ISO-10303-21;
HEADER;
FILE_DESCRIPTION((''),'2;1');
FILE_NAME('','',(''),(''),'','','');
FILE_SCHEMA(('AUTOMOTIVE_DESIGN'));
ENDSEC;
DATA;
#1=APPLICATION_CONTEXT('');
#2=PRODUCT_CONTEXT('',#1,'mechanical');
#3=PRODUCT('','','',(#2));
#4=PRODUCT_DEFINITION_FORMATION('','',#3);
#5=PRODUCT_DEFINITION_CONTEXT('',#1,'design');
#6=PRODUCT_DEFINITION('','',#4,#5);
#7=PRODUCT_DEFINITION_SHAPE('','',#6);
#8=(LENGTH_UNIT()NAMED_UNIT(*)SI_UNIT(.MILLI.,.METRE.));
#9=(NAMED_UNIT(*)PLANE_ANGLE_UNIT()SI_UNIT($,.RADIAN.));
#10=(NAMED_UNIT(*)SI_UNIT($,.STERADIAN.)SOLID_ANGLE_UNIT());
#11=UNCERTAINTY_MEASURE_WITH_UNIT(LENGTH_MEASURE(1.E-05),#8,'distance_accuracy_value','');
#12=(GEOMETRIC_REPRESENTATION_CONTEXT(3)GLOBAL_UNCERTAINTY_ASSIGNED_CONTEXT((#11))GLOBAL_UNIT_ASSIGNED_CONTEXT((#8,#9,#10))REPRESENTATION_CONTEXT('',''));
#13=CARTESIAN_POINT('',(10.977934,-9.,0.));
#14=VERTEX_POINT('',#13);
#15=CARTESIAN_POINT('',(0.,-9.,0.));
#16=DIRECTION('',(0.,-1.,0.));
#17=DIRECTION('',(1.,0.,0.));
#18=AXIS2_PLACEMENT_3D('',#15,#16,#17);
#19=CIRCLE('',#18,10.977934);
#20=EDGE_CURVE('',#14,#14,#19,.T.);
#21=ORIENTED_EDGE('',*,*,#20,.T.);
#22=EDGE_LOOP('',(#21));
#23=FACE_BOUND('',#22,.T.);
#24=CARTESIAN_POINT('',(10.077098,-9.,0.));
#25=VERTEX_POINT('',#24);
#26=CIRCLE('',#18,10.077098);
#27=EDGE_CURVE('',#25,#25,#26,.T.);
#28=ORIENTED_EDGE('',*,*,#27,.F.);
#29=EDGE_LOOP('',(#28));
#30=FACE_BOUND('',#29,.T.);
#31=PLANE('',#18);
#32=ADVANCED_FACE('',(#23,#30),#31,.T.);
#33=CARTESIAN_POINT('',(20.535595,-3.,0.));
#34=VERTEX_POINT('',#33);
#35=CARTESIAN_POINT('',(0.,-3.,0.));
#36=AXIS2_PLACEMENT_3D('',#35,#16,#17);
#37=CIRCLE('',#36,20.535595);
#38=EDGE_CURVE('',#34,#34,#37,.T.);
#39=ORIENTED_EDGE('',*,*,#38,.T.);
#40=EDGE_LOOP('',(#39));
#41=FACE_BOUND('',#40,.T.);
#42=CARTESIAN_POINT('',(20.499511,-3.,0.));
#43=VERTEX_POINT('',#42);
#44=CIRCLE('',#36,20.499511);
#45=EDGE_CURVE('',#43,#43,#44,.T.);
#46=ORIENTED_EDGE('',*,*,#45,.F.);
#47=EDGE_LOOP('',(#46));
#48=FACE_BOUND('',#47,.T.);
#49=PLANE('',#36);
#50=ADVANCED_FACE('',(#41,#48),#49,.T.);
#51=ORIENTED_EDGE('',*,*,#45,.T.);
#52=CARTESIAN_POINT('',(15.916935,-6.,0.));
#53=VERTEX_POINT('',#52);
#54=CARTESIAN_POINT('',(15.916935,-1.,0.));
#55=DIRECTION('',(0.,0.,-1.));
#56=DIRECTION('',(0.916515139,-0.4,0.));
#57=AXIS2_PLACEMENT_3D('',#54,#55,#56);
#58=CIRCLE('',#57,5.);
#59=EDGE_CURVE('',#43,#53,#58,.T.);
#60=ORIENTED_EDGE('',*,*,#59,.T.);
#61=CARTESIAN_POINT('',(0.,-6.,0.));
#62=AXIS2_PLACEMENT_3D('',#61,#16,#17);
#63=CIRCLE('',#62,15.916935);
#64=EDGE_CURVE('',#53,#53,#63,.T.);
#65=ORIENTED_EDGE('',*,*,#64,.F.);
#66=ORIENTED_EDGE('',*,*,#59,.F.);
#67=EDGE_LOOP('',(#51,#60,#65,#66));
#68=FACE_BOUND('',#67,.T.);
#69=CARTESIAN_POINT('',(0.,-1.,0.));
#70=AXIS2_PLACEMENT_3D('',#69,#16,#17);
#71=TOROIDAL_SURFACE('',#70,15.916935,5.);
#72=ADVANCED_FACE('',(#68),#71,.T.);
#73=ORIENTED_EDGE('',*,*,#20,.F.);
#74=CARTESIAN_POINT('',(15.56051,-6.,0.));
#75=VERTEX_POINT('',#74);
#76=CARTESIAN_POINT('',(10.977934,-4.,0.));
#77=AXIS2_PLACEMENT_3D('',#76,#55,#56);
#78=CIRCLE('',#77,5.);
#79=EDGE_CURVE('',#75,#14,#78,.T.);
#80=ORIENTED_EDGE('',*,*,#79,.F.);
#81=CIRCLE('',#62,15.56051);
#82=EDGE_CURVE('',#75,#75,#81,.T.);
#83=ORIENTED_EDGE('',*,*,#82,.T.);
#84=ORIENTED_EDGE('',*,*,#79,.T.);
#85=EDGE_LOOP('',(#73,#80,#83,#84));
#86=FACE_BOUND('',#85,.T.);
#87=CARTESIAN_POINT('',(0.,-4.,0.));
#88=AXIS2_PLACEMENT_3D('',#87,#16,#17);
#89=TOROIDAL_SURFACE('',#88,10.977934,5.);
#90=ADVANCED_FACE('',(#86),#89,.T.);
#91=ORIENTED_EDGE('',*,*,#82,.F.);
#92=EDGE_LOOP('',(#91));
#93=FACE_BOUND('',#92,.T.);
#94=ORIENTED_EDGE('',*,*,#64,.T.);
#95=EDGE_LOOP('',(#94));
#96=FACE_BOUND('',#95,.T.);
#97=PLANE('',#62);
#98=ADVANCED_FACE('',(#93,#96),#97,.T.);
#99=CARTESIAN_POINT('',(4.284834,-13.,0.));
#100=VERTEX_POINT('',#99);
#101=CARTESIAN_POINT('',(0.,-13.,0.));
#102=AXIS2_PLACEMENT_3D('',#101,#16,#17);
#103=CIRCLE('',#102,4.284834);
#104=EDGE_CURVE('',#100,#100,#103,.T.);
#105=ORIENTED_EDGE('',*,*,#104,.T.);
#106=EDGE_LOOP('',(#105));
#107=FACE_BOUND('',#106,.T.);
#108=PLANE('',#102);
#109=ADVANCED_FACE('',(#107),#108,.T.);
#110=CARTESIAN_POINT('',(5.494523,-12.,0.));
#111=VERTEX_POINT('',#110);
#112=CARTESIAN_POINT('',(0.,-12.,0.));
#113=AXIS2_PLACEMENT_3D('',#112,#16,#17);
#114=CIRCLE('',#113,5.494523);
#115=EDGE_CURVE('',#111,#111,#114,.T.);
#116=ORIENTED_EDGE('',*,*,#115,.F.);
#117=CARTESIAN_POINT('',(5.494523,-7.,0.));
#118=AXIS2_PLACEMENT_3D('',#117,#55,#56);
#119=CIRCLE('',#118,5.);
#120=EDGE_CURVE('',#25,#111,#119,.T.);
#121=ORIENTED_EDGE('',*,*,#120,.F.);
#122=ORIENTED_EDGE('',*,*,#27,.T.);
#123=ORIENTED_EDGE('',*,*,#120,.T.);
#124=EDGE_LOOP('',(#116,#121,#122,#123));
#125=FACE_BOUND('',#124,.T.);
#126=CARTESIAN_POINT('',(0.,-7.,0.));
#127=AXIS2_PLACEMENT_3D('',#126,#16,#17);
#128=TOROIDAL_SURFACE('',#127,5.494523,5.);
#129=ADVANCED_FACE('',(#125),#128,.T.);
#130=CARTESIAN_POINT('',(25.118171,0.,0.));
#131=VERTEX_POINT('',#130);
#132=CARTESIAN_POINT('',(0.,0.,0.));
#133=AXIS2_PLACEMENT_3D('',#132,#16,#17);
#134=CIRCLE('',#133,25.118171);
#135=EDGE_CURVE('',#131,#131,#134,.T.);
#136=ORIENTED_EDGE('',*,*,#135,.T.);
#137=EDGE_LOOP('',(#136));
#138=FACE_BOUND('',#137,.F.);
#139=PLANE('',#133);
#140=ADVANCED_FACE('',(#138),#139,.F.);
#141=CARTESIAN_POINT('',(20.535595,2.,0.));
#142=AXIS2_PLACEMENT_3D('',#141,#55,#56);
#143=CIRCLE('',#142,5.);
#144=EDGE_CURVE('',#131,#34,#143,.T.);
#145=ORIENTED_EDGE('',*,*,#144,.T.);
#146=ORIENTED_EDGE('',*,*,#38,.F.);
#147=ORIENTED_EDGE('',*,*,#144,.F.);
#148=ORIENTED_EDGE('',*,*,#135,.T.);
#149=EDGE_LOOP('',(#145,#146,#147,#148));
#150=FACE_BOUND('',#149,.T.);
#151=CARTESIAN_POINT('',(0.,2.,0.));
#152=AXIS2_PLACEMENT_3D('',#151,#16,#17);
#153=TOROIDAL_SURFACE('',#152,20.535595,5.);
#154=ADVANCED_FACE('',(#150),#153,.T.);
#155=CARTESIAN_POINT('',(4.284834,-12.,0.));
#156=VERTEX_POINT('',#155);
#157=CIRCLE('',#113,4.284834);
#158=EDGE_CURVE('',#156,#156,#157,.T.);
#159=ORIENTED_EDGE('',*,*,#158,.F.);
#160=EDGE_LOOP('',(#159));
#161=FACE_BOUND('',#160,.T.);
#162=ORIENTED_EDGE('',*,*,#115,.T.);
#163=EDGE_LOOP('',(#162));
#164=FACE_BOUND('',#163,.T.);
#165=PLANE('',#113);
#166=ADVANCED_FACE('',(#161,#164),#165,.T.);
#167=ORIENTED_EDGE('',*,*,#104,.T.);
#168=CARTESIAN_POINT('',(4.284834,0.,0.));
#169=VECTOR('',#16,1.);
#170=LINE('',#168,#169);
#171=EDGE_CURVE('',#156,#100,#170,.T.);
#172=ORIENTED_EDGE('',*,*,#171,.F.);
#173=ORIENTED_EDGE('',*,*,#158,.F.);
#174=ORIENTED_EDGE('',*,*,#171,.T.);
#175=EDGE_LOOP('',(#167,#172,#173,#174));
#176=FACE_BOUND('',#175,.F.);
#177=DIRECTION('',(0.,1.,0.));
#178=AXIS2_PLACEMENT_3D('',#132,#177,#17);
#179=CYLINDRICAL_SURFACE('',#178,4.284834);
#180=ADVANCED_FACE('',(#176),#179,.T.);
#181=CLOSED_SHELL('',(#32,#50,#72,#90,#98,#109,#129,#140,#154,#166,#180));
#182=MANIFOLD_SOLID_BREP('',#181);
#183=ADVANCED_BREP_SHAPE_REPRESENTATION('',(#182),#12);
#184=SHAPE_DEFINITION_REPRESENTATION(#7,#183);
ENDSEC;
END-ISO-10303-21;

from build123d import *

# Parameters (mm, degrees)
F0_R     = 25.1181711361
F0_R_2   = 20.4995111856
F1_DEPTH = 3
F0_R_3   = 15.560509686
F2_DEPTH = 6
F0_R_4   = 10.0770984701
F3_DEPTH = 9
F0_R_5   = 4.2848341216
F4_DEPTH = 12
F0_R_6   = 1.2539122761
F5_DEPTH = 13
F6_DEPTH = 13


# Not quite as in the source:
# - a fillet or chamfer that OpenCascade refuses, or shapes differently, is made with other operations: its cross-section is extruded or revolved along the edge and cut away or added


with BuildPart() as f1:
    # F0 (on Front) → F1 (new body)
    with BuildSketch(Plane.XZ):
        Circle(F0_R)
        Circle(F0_R_2, mode=Mode.SUBTRACT)
    extrude(amount=F1_DEPTH)

    # F0 (on Front) → F2 (join)
    with BuildSketch(Plane.XZ):
        Circle(F0_R_2)
        Circle(F0_R_3, mode=Mode.SUBTRACT)
    extrude(amount=F2_DEPTH)

    # F0 (on Front) → F3 (join)
    with BuildSketch(Plane.XZ):
        Circle(F0_R_3)
        Circle(F0_R_4, mode=Mode.SUBTRACT)
    extrude(amount=F3_DEPTH)

    # F0 (on Front) → F4 (join)
    with BuildSketch(Plane.XZ):
        Circle(F0_R_4)
        Circle(F0_R_5, mode=Mode.SUBTRACT)
    extrude(amount=F4_DEPTH)

    # F0 (on Front) → F5 (join)
    with BuildSketch(Plane.XZ):
        Circle(F0_R_5)
        Circle(F0_R_6, mode=Mode.SUBTRACT)
    extrude(amount=F5_DEPTH)

    # F0 (on Front) → F6 (join)
    with BuildSketch(Plane.XZ):
        Circle(F0_R_6)
    extrude(amount=F6_DEPTH)

    # F7: fillet of radius 5 on 4 edges, made by hand

    # F7_s1 → F7_t2 (revolve, cut)
    with BuildSketch(Plane.XY):
        with BuildLine():
            ThreePointArc((25.1181711361, 0), (23.2742082286, -2.1833001327), (20.5355954411, -3))
            Line((20.5355954411, -3), (25.1181711361, -3))
            Line((25.1181711361, -3), (25.1181711361, 0))
        make_face()
    revolve(axis=Axis((0, -3, 0), (0, -1, 0)), mode=Mode.SUBTRACT)

    # F7_s3 → F7_t4 (revolve, cut)
    with BuildSketch(Plane.XY):
        with BuildLine():
            ThreePointArc((20.4995111856, -3), (18.6555482782, -5.1833001327), (15.9169354907, -6))
            Line((15.9169354907, -6), (20.4995111856, -6))
            Line((20.4995111856, -6), (20.4995111856, -3))
        make_face()
    revolve(axis=Axis((0, -6, 0), (0, -1, 0)), mode=Mode.SUBTRACT)

    # F7_s5 → F7_t6 (revolve, cut)
    with BuildSketch(Plane.XY):
        with BuildLine():
            ThreePointArc((15.560509686, -6), (13.7165467785, -8.1833001327), (10.977933991, -9))
            Line((10.977933991, -9), (15.560509686, -9))
            Line((15.560509686, -9), (15.560509686, -6))
        make_face()
    revolve(axis=Axis((0, -9, 0), (0, -1, 0)), mode=Mode.SUBTRACT)

    # F7_s7 → F7_t8 (revolve, cut)
    with BuildSketch(Plane.XY):
        with BuildLine():
            ThreePointArc((10.0770984701, -9), (8.2331355627, -11.1833001327), (5.4945227752, -12))
            Line((5.4945227752, -12), (10.0770984701, -12))
            Line((10.0770984701, -12), (10.0770984701, -9))
        make_face()
    revolve(axis=Axis((0, -12, 0), (0, -1, 0)), mode=Mode.SUBTRACT)


solid = f1.part
